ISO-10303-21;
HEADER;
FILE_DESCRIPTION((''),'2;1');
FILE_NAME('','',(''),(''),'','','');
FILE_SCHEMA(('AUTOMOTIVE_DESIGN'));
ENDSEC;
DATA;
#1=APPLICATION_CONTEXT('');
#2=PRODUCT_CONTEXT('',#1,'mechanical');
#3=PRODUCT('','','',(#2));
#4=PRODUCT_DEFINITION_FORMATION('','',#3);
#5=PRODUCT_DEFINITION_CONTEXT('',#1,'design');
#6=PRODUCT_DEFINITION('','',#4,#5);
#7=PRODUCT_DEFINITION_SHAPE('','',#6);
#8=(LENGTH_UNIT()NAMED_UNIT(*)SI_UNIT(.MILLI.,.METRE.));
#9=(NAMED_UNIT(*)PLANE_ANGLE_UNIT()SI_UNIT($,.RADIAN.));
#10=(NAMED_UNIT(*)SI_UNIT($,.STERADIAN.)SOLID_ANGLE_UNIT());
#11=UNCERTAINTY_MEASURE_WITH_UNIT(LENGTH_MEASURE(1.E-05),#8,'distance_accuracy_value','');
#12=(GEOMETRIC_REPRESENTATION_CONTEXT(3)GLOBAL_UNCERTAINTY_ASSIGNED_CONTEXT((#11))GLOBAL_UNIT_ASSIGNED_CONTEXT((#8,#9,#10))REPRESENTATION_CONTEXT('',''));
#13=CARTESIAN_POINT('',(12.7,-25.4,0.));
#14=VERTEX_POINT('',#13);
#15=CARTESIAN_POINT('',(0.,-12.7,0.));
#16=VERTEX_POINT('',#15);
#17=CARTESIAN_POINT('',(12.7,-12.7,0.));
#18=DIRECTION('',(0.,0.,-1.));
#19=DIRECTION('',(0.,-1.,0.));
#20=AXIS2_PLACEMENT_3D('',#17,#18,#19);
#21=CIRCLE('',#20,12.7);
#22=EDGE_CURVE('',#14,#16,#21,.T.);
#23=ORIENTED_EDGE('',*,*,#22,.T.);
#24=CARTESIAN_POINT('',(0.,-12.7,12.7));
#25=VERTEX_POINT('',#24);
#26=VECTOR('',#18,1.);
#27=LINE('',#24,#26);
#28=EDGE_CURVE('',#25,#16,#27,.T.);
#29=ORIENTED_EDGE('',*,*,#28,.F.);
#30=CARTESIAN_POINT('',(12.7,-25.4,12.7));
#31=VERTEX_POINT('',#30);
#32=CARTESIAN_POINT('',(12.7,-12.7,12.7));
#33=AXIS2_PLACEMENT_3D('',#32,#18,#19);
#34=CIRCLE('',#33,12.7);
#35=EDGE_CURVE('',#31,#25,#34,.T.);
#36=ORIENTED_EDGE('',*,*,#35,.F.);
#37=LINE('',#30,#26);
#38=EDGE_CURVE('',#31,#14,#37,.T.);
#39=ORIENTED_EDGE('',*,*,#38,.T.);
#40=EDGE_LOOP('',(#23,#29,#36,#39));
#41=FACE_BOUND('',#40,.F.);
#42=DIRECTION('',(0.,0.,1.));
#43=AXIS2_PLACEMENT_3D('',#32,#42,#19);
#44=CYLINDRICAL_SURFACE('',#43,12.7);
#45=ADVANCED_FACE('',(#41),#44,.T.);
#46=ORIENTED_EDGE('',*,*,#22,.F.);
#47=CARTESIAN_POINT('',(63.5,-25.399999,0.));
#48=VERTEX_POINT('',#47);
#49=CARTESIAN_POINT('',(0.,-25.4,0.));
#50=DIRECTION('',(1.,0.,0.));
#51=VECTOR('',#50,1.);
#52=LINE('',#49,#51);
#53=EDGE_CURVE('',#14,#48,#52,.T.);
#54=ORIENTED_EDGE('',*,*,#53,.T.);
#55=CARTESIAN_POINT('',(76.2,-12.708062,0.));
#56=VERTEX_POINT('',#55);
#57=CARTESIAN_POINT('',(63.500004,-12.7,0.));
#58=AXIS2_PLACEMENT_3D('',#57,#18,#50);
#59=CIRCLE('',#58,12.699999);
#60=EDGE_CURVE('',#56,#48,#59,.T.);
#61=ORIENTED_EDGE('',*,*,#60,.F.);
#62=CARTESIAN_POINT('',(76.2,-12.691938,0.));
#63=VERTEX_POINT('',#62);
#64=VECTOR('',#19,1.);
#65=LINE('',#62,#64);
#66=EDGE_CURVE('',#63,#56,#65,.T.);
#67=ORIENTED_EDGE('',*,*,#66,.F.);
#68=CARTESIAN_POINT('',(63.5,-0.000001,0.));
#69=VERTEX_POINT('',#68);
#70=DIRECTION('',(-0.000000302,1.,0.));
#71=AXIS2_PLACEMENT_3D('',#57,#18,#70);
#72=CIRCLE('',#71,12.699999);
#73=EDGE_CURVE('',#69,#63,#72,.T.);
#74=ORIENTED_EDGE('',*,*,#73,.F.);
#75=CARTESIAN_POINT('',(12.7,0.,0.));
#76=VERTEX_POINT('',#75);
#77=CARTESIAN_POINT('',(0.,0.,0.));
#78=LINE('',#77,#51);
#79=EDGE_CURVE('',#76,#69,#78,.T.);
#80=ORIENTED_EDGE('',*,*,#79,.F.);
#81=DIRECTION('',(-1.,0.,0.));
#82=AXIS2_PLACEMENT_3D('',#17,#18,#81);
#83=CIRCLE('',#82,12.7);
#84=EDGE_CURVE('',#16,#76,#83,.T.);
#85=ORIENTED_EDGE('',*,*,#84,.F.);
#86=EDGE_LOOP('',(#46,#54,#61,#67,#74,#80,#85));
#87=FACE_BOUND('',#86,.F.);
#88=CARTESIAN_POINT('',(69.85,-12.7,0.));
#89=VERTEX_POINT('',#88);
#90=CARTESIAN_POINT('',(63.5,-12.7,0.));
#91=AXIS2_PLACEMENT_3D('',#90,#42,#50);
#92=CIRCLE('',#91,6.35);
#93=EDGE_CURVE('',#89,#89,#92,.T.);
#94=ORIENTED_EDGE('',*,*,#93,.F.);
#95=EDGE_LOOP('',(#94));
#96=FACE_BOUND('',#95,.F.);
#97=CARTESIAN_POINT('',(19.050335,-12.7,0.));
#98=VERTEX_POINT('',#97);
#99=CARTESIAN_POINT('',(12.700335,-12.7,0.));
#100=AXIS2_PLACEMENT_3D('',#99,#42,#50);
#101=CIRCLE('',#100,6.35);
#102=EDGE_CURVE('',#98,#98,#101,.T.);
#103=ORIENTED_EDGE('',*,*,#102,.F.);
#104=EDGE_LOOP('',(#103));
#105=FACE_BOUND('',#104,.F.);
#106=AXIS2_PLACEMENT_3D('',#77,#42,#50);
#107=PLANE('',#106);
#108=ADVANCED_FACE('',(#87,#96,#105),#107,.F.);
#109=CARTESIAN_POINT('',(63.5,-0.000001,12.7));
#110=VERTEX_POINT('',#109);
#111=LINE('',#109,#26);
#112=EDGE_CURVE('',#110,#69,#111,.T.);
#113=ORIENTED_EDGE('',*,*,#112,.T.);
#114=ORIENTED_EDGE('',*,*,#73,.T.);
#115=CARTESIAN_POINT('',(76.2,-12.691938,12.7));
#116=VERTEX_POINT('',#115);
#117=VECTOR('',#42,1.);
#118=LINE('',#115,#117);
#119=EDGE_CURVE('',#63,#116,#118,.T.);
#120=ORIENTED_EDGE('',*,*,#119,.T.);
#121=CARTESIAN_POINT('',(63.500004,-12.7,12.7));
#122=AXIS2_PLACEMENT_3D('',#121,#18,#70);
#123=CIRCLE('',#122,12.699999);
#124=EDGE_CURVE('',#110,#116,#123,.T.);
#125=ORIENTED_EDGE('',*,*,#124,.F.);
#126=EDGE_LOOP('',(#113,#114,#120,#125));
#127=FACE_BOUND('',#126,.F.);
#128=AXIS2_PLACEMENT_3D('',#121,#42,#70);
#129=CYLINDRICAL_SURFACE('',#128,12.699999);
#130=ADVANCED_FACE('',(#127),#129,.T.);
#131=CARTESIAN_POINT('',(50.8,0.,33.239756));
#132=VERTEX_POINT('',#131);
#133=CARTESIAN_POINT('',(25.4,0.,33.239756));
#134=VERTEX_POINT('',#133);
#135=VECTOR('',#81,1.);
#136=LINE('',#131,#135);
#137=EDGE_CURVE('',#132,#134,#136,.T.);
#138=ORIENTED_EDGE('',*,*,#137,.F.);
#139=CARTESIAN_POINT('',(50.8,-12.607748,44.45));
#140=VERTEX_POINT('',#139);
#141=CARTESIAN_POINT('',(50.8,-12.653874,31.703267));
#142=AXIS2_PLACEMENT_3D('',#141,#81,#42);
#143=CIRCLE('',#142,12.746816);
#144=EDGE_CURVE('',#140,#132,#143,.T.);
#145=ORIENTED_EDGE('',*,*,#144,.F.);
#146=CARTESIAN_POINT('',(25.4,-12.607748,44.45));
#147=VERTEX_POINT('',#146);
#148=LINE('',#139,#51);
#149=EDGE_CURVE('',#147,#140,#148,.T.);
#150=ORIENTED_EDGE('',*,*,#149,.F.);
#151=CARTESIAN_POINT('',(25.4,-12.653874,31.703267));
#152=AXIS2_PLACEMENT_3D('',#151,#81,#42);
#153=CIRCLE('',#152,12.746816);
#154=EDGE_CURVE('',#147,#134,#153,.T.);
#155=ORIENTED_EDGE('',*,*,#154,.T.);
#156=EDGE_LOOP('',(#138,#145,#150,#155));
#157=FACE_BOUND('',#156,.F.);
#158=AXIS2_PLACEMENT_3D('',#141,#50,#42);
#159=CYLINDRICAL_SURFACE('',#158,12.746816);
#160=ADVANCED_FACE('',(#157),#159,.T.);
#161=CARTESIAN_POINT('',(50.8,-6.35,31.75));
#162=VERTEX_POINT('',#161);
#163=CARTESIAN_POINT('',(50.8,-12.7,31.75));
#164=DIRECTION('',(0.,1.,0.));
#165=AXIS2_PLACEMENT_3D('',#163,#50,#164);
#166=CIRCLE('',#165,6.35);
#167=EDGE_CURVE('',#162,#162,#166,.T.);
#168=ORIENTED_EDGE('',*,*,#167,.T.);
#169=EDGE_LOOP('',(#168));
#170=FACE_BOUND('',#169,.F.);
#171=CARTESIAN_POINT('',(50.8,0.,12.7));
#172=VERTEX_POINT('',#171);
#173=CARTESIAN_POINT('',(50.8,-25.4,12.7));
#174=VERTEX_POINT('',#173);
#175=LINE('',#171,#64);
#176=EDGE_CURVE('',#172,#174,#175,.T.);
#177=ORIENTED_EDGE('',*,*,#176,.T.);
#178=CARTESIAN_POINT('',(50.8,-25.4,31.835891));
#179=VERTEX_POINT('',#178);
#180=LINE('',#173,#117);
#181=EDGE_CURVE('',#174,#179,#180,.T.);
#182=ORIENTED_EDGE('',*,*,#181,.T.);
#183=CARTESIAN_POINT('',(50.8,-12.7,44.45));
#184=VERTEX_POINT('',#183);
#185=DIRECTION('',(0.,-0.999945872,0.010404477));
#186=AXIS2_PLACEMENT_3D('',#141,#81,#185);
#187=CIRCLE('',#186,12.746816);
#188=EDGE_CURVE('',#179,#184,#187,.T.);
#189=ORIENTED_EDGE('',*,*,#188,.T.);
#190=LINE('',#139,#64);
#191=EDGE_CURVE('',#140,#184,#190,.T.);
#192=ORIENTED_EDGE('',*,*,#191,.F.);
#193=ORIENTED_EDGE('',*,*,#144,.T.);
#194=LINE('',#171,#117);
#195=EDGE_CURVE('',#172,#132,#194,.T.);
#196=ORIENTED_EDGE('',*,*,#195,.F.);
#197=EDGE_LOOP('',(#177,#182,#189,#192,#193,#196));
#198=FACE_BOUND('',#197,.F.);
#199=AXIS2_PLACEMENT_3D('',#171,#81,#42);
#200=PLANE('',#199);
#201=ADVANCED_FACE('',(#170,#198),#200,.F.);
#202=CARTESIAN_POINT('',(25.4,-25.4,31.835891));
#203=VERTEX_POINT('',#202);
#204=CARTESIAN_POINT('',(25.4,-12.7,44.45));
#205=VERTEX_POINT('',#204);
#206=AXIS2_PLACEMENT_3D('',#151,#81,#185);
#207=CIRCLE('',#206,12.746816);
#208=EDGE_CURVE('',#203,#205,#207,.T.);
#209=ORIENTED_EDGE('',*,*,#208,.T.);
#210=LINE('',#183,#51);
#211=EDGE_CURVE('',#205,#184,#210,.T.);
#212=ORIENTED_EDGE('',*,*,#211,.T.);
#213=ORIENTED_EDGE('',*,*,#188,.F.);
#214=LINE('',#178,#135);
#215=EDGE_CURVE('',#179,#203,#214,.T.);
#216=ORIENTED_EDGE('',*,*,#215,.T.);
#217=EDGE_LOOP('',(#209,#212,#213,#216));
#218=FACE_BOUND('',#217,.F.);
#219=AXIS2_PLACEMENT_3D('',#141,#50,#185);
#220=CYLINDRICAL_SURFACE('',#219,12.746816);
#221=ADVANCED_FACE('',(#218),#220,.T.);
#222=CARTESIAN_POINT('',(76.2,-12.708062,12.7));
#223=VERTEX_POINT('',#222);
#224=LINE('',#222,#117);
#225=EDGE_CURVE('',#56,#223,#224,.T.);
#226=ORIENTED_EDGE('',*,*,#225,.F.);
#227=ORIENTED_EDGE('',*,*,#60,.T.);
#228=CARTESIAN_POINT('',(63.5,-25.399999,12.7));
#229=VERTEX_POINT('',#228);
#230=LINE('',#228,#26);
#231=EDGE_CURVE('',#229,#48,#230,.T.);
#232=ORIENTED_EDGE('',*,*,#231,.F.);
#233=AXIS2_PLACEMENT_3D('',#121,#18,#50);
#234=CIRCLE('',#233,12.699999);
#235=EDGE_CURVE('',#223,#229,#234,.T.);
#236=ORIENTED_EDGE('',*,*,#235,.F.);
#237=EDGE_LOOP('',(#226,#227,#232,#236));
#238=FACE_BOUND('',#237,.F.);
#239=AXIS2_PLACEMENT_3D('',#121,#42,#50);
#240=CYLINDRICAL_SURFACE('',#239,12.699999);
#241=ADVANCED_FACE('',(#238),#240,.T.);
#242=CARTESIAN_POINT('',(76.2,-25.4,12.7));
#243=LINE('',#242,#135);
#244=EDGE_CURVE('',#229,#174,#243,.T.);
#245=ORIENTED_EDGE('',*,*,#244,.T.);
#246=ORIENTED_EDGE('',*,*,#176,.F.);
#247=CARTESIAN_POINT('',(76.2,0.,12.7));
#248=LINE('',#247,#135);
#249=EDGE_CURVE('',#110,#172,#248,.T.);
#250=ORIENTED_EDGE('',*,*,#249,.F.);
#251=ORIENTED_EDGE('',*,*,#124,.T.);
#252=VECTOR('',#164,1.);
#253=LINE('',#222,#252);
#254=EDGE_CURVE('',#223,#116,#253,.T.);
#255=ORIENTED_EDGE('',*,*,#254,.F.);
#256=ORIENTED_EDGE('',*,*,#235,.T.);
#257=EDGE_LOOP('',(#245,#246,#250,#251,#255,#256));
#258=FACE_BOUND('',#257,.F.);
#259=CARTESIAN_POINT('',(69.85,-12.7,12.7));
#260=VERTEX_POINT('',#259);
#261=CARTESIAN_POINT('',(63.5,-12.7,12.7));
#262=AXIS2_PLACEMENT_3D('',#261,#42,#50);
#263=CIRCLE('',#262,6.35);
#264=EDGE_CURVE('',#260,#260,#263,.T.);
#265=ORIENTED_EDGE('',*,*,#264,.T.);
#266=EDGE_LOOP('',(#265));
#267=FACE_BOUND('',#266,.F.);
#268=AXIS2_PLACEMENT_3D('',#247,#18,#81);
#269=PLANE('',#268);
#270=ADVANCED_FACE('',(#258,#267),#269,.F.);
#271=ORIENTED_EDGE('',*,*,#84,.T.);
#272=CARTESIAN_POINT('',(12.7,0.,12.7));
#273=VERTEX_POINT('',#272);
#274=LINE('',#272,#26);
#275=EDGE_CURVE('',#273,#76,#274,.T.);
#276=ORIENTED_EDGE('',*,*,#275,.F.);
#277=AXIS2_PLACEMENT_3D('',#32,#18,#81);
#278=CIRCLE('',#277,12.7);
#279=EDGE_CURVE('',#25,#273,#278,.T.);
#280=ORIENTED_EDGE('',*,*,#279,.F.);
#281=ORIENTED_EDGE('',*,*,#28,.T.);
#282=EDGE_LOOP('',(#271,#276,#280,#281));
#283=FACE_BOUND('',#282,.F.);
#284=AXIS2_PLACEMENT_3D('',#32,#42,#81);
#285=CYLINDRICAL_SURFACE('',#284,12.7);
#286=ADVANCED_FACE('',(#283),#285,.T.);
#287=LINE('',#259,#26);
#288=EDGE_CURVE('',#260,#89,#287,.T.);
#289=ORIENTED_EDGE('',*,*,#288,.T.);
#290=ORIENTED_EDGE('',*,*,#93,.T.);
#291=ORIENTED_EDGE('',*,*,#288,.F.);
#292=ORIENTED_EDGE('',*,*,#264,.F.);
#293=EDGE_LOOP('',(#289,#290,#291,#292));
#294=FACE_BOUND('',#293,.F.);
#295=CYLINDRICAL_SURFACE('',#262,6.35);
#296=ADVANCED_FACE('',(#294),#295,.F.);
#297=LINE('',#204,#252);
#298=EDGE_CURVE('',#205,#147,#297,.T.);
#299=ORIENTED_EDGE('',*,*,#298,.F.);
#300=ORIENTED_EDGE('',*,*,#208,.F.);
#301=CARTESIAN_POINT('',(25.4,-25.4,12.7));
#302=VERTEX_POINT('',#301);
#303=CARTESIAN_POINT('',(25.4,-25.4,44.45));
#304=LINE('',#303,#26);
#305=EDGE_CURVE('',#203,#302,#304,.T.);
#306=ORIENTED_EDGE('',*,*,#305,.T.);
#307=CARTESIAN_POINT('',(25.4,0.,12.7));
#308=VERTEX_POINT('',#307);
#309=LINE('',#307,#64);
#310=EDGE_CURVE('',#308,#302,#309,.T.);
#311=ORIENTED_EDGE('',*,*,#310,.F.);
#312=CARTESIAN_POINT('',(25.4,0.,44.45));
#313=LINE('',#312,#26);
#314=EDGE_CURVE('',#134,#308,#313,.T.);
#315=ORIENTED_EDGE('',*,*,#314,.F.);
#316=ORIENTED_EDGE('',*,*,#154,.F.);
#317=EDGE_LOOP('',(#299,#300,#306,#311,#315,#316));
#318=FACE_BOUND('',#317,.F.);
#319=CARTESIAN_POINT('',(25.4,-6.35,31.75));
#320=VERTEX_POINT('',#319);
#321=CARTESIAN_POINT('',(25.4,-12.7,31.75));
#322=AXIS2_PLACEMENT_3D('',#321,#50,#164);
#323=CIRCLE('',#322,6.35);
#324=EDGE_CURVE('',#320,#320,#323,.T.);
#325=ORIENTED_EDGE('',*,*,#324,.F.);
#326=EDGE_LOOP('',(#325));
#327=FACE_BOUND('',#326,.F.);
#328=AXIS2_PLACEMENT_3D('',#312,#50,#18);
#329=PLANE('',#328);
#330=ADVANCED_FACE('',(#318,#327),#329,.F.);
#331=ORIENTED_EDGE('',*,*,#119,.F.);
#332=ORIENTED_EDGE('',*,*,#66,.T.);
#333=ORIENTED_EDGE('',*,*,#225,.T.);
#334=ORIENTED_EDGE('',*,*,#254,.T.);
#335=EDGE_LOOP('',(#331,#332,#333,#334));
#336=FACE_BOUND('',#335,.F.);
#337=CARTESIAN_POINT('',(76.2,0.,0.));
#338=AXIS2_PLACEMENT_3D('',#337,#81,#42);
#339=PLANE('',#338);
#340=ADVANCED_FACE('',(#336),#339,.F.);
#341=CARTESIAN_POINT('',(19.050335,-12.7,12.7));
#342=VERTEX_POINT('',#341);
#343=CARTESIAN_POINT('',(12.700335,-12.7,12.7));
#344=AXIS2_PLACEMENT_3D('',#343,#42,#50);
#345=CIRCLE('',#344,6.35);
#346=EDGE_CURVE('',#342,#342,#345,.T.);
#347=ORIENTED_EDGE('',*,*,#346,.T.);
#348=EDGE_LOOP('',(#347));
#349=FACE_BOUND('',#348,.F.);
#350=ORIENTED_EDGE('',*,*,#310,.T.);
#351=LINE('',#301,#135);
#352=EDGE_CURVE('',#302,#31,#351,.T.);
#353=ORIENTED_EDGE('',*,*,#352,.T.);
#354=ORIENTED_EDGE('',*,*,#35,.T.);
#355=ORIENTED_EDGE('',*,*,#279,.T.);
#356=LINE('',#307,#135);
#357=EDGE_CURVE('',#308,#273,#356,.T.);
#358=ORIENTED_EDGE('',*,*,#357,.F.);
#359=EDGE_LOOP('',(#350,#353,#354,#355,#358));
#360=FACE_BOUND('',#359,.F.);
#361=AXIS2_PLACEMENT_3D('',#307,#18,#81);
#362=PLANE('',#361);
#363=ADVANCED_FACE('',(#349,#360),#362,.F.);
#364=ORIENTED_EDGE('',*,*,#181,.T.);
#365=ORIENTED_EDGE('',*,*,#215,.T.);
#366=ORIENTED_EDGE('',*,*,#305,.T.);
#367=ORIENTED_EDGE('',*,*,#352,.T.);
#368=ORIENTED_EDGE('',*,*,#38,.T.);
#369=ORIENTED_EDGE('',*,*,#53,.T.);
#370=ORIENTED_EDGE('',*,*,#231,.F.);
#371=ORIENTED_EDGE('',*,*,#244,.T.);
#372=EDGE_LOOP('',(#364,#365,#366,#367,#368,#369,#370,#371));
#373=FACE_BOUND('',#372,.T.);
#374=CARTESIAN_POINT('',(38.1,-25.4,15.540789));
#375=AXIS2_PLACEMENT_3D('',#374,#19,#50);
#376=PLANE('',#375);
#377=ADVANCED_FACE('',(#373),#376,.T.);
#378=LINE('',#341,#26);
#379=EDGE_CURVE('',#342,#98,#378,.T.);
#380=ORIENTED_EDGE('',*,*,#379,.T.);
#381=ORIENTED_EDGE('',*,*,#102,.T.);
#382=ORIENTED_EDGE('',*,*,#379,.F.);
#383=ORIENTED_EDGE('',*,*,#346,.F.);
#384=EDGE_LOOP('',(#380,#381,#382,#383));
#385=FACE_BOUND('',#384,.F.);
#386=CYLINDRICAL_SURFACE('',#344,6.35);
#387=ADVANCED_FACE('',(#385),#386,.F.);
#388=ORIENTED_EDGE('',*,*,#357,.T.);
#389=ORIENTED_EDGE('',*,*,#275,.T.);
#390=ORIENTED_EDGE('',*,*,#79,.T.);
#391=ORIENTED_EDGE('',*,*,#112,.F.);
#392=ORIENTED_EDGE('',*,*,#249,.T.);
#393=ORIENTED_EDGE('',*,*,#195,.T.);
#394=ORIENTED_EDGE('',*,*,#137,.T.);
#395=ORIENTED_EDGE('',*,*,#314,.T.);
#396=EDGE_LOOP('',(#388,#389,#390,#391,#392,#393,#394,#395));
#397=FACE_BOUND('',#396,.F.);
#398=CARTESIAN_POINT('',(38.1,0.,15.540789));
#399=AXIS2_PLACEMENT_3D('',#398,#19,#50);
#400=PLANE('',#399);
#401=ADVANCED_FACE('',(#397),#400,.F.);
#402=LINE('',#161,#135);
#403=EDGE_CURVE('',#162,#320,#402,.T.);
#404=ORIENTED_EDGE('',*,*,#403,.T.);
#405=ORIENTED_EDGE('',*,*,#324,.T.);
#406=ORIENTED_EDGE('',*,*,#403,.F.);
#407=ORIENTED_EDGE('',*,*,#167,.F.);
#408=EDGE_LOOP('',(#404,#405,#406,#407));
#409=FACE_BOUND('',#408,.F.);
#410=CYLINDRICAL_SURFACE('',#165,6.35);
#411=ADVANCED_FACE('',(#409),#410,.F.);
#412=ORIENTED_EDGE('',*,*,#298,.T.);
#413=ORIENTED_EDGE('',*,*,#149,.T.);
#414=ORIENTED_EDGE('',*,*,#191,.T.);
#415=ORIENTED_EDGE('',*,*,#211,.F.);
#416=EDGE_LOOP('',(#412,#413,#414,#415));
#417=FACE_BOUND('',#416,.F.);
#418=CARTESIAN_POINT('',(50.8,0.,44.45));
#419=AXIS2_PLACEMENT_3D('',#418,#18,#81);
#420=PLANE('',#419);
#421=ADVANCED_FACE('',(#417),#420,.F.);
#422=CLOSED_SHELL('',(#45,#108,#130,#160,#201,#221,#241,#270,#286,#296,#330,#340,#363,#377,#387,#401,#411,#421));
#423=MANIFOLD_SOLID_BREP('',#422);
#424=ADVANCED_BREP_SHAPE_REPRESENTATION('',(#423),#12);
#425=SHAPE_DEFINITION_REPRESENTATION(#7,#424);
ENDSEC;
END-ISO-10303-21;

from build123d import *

# Parameters (mm, degrees)
F1_DEPTH = 25.4
F2_R     = 6.35
F3_DEPTH = 25.4
F4_R     = 6.35
F5_DEPTH = 12.7
F7_DEPTH = 12.7


# Not quite as in the source:
# - ends of sketch curves that miss each other by under 0.0002 mm in the source are joined


with BuildPart() as f1:
    # F0 (on Front) → F1 (new body)
    with BuildSketch(Plane.XZ):
        Polygon((0, 12.7), (0, 0), (76.2, 0), (76.2, 12.7), (50.8, 12.7), (50.8, 44.45), (25.4, 44.45), (25.4, 12.7), align=None)
    extrude(amount=F1_DEPTH)

    # F2 (on face) → F3 (cut)
    with BuildSketch(Plane.YZ.offset(50.8)):
        with Locations((-12.7, 31.75)):
            Circle(F2_R)
        with BuildLine():
            ThreePointArc((-12.6538738539, 44.4500834572), (-4.2011824857, 41.2444061447), (0, 33.2397559887))
            Line((0, 33.2397559887), (0, 44.45))
            Line((0, 44.45), (-12.6538738539, 44.4500834572))
        make_face()
        with BuildLine():
            ThreePointArc((-25.4, 31.8358913064), (-21.6202217079, 40.7633957722), (-12.6538738539, 44.4500834572))
            Line((-12.6538738539, 44.4500834572), (-25.4, 44.45))
            Line((-25.4, 44.45), (-25.4, 31.8358913064))
        make_face()
    extrude(amount=-F3_DEPTH, mode=Mode.SUBTRACT)

    # F4 (on face) → F5 (cut)
    with BuildSketch(Plane.XY.offset(12.7)):
        with Locations((12.7003350629, -12.6999999956)):
            Circle(F4_R)
        with BuildLine():
            ThreePointArc((0, -12.7), (3.7197438789, -3.7197438789), (12.7, 0))
            Line((12.7, 0), (0, 0))
            Line((0, 0), (0, -12.7))
        make_face()
        with Locations((63.5, -12.7)):
            Circle(F4_R)
        with BuildLine():
            Line((0, -25.4), (12.7, -25.4))
            ThreePointArc((12.7, -25.4), (3.7197438789, -21.6802561211), (0, -12.7))
            Line((0, -12.7), (0, -25.4))
        make_face()
    extrude(amount=-F5_DEPTH, mode=Mode.SUBTRACT)

    # F6 (on face) → F7 (cut)
    with BuildSketch(Plane.XY.offset(12.7)):
        with BuildLine():
            ThreePointArc((76.2000025586, -12.7), (72.4802576974, -21.6802565734), (63.5, -25.3999987207))
            Line((63.5, -25.3999987207), (76.2, -25.4))
            Line((76.2, -25.4), (76.2000025586, -12.7))
        make_face()
        with BuildLine():
            ThreePointArc((63.5, -1.2793e-06), (72.4802576975, -3.7197434266), (76.2000025586, -12.7))
            Line((76.2000025586, -12.7), (76.2, 0))
            Line((76.2, 0), (63.5, -1.2793e-06))
        make_face()
    extrude(amount=-F7_DEPTH, mode=Mode.SUBTRACT)


solid = f1.part
